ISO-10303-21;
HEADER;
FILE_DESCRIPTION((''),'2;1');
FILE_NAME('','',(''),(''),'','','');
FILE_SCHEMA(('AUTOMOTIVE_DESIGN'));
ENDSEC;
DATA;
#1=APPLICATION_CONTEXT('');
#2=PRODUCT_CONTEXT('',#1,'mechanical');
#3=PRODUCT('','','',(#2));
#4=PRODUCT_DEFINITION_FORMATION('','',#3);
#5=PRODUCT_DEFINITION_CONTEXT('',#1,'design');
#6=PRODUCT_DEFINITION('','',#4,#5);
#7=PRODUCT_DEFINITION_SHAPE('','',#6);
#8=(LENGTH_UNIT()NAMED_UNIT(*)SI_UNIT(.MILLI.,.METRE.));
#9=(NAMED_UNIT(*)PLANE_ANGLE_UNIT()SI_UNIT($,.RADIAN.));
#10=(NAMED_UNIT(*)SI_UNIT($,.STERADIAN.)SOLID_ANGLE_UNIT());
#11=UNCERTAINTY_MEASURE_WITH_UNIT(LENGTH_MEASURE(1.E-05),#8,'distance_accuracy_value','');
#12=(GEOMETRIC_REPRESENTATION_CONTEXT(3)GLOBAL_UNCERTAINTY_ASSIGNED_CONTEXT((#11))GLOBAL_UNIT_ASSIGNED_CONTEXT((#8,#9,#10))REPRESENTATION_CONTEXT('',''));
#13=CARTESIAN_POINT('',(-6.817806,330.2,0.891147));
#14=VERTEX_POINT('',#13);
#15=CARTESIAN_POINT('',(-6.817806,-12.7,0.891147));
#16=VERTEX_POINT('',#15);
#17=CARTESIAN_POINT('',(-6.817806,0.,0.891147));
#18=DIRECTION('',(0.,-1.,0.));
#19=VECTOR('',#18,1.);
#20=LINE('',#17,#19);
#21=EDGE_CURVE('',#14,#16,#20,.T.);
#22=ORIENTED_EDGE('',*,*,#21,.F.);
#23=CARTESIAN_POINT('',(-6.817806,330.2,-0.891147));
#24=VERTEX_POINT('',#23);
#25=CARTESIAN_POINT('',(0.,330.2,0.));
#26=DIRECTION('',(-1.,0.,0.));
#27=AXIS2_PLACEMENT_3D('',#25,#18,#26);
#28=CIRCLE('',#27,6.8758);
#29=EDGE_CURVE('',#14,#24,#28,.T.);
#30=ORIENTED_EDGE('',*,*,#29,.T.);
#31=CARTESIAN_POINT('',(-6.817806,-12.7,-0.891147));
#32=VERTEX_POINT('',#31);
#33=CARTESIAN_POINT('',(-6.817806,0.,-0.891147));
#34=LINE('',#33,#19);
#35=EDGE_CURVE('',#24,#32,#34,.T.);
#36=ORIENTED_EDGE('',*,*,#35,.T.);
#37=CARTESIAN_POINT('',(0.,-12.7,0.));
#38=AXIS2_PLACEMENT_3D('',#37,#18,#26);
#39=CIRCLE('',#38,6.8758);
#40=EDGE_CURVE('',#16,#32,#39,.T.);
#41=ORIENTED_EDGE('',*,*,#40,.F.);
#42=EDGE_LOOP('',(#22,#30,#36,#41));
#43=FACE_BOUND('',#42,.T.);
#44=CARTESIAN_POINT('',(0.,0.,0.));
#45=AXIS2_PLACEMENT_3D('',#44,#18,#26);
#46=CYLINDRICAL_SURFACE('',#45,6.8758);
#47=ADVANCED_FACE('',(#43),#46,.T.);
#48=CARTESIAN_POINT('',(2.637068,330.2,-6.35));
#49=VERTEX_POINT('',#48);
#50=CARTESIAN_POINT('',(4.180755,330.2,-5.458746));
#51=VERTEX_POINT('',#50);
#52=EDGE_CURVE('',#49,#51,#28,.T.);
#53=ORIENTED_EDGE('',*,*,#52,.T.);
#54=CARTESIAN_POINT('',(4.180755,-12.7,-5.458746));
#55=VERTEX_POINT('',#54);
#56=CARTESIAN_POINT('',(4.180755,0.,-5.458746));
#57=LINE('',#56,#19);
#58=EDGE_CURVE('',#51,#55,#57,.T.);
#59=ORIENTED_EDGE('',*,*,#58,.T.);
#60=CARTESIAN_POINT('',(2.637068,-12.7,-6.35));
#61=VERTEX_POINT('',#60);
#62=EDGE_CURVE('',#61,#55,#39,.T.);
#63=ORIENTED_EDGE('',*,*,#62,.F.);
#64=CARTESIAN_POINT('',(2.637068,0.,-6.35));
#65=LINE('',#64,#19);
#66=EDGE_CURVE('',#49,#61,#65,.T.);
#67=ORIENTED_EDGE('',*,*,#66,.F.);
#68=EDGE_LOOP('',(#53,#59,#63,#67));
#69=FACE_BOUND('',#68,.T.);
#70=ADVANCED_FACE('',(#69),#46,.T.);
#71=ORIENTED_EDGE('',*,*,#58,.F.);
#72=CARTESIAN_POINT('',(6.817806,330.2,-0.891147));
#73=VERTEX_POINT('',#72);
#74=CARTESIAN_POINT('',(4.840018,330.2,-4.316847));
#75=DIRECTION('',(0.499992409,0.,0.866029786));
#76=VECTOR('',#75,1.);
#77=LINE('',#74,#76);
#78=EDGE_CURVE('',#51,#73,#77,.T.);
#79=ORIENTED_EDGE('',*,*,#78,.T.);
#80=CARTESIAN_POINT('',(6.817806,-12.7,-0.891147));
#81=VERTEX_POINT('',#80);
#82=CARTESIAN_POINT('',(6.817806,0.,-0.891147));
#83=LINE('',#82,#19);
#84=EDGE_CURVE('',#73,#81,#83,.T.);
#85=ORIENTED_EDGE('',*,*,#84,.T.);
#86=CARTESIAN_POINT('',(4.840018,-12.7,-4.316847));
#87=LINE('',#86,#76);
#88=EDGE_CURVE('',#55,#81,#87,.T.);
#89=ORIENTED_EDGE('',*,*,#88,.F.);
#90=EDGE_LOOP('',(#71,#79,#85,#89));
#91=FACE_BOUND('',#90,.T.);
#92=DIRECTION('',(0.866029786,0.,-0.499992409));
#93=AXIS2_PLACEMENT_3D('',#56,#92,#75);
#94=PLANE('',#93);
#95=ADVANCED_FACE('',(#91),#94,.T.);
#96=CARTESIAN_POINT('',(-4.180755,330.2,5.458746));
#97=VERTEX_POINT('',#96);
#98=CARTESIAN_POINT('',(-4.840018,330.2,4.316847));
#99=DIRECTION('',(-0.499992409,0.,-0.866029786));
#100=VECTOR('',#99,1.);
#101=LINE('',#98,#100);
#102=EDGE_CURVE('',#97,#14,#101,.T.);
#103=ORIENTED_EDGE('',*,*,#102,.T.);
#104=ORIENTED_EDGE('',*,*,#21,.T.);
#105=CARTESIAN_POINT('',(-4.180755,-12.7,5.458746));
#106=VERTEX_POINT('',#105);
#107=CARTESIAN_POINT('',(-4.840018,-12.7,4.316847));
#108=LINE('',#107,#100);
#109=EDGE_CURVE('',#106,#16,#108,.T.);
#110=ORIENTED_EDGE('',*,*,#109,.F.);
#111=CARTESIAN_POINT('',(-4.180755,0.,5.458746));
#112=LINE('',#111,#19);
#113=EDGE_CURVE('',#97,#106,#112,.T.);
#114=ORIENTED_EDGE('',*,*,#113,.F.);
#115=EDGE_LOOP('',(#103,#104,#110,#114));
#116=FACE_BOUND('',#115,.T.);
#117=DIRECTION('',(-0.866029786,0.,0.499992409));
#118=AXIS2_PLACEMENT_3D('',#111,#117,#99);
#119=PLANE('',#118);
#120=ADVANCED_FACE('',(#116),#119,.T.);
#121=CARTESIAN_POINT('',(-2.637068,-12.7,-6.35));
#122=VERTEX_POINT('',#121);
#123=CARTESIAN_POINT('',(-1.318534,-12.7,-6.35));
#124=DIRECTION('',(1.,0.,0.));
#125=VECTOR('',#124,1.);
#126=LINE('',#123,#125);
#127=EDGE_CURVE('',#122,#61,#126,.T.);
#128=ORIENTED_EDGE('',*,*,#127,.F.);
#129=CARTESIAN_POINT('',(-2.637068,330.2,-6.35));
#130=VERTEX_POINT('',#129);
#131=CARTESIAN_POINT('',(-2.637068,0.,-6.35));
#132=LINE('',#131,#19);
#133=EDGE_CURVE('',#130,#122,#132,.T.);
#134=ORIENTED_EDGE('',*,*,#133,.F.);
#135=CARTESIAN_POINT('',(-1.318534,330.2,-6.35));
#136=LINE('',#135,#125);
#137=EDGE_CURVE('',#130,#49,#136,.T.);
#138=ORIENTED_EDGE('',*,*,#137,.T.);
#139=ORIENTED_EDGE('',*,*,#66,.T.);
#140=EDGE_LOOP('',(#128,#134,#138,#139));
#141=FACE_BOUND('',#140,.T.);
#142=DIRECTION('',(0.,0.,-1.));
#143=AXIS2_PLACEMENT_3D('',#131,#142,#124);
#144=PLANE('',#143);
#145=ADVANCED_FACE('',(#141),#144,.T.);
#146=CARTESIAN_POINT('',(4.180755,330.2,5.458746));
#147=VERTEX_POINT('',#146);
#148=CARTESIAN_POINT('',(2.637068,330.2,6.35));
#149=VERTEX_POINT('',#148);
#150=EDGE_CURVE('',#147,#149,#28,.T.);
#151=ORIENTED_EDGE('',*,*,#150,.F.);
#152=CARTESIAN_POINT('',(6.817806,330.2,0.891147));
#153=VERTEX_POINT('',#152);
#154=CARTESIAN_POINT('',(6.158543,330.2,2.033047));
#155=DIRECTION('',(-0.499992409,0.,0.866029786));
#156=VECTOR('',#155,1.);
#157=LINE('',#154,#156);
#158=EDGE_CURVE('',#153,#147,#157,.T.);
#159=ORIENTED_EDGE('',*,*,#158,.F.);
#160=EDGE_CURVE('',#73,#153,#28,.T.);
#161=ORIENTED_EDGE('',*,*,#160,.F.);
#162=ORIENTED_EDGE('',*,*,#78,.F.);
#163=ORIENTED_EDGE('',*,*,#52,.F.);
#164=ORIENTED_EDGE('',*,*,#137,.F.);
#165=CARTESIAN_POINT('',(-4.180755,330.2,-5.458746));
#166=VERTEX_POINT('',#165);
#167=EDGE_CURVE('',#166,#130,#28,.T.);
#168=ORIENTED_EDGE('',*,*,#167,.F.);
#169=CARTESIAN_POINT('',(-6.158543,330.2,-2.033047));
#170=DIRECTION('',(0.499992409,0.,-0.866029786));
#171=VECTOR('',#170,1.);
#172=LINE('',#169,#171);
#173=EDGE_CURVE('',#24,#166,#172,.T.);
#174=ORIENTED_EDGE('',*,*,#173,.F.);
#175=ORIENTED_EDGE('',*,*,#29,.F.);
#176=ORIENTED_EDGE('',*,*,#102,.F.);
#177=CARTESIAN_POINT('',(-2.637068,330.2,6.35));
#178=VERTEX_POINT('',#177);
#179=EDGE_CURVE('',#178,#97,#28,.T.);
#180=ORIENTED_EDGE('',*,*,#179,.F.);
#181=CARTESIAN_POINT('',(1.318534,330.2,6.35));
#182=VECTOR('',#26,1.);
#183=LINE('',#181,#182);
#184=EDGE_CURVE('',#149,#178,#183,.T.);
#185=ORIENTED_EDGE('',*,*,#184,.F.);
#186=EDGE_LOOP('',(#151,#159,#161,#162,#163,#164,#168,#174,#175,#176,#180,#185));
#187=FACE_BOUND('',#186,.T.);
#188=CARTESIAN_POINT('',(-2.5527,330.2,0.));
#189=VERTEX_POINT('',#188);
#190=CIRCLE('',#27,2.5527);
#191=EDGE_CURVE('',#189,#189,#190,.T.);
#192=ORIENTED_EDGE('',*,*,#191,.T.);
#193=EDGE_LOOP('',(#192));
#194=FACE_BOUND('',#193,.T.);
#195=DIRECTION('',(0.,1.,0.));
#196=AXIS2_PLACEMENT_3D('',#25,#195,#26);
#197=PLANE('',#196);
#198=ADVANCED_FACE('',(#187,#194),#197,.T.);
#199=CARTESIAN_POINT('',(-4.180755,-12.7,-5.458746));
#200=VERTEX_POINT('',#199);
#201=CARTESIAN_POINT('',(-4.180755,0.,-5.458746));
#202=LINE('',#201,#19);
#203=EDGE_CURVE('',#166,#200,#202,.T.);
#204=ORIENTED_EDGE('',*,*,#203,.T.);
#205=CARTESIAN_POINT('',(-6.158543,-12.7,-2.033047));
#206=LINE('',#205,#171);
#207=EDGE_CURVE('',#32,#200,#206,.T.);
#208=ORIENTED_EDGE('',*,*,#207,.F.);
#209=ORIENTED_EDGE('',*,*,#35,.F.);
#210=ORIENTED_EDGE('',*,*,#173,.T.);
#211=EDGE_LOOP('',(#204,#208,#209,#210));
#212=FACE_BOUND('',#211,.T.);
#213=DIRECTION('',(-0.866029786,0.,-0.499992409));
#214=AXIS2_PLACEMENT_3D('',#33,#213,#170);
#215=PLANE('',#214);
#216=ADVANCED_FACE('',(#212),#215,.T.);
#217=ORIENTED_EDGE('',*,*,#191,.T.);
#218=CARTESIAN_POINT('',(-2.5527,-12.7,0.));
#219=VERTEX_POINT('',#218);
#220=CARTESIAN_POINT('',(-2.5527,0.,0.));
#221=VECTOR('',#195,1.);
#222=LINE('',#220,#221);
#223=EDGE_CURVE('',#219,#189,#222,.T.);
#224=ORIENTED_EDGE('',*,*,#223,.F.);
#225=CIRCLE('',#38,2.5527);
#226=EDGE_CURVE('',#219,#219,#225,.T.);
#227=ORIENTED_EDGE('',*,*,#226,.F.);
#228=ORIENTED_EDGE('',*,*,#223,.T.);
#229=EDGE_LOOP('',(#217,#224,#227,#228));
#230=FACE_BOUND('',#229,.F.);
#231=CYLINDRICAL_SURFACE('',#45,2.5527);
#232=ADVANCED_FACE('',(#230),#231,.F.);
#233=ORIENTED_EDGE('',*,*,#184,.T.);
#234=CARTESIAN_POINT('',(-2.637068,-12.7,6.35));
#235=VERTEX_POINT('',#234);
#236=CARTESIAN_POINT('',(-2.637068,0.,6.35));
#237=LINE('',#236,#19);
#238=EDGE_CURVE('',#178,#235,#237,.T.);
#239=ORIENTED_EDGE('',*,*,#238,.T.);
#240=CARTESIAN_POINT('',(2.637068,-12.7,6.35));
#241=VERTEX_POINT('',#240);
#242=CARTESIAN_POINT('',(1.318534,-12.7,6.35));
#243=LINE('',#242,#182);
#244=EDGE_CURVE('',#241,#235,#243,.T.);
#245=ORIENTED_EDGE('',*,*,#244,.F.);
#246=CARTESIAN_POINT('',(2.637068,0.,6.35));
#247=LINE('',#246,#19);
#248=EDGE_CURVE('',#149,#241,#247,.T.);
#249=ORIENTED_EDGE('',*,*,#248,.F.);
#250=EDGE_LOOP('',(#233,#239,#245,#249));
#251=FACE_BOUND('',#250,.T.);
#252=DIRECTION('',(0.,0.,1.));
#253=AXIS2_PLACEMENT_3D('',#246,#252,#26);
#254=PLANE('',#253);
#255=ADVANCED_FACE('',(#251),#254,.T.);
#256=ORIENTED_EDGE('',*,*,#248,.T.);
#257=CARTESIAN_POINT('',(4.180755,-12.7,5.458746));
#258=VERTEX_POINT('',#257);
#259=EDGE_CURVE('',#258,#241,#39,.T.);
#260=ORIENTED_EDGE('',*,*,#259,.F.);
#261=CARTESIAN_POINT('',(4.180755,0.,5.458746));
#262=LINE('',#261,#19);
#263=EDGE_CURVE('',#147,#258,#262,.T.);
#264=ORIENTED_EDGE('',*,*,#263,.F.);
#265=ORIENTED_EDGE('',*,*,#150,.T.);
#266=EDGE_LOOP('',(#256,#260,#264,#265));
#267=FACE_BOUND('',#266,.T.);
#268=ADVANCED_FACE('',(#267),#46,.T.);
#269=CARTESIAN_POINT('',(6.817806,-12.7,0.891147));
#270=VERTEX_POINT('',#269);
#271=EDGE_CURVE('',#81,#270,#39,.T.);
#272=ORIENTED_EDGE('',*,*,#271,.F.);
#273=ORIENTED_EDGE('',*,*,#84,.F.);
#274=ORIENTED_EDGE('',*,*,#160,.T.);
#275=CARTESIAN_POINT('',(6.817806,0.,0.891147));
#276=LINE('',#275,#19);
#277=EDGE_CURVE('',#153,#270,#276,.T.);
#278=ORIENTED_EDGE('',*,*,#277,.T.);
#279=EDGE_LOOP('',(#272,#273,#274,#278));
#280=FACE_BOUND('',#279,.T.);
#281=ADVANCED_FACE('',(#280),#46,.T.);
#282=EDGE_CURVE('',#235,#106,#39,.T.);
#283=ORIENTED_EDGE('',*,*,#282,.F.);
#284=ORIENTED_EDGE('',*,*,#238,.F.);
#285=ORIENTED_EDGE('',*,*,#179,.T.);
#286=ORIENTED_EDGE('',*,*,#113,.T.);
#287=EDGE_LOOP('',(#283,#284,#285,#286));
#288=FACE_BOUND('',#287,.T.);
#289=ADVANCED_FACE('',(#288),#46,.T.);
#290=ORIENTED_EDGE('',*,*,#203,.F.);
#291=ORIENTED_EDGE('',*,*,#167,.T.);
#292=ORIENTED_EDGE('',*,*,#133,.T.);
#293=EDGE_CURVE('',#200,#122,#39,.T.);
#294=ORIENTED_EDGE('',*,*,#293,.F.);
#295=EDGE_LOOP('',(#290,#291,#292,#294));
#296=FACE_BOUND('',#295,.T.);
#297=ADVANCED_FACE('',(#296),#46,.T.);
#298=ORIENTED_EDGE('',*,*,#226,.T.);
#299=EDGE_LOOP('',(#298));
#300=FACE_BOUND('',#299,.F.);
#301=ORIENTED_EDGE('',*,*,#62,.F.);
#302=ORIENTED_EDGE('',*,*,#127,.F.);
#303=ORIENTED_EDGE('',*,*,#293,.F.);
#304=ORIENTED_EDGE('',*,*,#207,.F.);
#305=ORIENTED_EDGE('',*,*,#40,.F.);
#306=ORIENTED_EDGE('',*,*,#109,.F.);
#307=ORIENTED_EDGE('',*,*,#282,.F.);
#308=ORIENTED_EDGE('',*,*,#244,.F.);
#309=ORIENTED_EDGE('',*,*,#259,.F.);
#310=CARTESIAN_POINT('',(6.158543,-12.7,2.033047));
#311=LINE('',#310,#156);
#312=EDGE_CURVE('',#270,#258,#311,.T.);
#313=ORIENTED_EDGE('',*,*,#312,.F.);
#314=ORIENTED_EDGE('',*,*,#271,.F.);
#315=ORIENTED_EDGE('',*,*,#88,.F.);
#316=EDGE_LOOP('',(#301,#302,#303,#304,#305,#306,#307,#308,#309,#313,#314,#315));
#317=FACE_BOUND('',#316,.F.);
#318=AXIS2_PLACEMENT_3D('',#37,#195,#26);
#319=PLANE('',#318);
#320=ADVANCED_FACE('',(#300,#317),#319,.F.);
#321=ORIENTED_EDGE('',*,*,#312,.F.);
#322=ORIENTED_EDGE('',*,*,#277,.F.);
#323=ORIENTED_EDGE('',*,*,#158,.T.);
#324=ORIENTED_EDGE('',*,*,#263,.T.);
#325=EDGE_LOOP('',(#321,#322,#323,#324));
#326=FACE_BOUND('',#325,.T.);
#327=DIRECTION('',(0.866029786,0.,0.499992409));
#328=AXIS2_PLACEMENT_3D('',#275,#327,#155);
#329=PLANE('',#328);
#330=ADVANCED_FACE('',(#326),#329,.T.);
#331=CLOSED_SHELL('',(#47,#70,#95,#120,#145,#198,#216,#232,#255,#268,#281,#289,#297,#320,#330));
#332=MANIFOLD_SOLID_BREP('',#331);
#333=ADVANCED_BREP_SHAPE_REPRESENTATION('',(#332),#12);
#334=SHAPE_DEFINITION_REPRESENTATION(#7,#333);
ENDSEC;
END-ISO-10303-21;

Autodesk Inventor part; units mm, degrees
ref_plane "YZ Plane" through (0, 0, 0) normal (1, 0, 0) x (0, 1, 0)
ref_plane "XZ Plane" through (0, 0, 0) normal (0, 1, 0) x (-1, 0, 0)
ref_plane "XY Plane" through (0, 0, 0) normal (0, 0, 1) x (1, 0, 0)
sketch "Sketch1" plane through (0, 0, 0) normal (0, 1, 0) x (-1, 0, 0)
  line L0 (7.3323, 0) -> (3.6662, -6.35)
  line L1 (3.6662, -6.35) -> (-3.6662, -6.35)
  line L2 (-3.6662, -6.35) -> (-7.3323, 0)
  line L3 (-7.3323, 0) -> (-3.6662, 6.35)
  line L4 (-3.6662, 6.35) -> (3.6662, 6.35)
  line L5 (3.6662, 6.35) -> (7.3323, 0)
  circle A0 centre (0, 0) radius 2.5527
  circle A1 centre (0, 0) radius 6.8758
  point P0 (2.637, -6.35)
  point P1 (4.1808, -5.4587)
  point P2 (6.8178, -0.8913)
  point P3 (6.8178, 0.8913)
  point P4 (4.1808, 5.4587)
  point P5 (2.637, 6.35)
  point P6 (-2.637, 6.35)
  point P7 (-4.1808, 5.4587)
  point P8 (-6.8178, 0.8913)
  point P9 (-6.8178, -0.8913)
  point P10 (-4.1808, -5.4587)
  point P11 (-2.637, -6.35)
  dimension "d0" = 6.35
  dimension "d1" = 5.1054
  dimension "d2" = 13.7516
extrude "Extrusion1" add sketch "Sketch1" along normal blind 317.5 contours L0 A1 L1 L2 L3 L4 L5
move faces "Move1" translate (0, 12.7, 0) faces at (-0.1026, 317.5, -5.078)
move faces "Move2" translate (0, -12.7, 0) faces at (-0.1026, 0, -5.078)
properties part number "thunder hex 13in"
